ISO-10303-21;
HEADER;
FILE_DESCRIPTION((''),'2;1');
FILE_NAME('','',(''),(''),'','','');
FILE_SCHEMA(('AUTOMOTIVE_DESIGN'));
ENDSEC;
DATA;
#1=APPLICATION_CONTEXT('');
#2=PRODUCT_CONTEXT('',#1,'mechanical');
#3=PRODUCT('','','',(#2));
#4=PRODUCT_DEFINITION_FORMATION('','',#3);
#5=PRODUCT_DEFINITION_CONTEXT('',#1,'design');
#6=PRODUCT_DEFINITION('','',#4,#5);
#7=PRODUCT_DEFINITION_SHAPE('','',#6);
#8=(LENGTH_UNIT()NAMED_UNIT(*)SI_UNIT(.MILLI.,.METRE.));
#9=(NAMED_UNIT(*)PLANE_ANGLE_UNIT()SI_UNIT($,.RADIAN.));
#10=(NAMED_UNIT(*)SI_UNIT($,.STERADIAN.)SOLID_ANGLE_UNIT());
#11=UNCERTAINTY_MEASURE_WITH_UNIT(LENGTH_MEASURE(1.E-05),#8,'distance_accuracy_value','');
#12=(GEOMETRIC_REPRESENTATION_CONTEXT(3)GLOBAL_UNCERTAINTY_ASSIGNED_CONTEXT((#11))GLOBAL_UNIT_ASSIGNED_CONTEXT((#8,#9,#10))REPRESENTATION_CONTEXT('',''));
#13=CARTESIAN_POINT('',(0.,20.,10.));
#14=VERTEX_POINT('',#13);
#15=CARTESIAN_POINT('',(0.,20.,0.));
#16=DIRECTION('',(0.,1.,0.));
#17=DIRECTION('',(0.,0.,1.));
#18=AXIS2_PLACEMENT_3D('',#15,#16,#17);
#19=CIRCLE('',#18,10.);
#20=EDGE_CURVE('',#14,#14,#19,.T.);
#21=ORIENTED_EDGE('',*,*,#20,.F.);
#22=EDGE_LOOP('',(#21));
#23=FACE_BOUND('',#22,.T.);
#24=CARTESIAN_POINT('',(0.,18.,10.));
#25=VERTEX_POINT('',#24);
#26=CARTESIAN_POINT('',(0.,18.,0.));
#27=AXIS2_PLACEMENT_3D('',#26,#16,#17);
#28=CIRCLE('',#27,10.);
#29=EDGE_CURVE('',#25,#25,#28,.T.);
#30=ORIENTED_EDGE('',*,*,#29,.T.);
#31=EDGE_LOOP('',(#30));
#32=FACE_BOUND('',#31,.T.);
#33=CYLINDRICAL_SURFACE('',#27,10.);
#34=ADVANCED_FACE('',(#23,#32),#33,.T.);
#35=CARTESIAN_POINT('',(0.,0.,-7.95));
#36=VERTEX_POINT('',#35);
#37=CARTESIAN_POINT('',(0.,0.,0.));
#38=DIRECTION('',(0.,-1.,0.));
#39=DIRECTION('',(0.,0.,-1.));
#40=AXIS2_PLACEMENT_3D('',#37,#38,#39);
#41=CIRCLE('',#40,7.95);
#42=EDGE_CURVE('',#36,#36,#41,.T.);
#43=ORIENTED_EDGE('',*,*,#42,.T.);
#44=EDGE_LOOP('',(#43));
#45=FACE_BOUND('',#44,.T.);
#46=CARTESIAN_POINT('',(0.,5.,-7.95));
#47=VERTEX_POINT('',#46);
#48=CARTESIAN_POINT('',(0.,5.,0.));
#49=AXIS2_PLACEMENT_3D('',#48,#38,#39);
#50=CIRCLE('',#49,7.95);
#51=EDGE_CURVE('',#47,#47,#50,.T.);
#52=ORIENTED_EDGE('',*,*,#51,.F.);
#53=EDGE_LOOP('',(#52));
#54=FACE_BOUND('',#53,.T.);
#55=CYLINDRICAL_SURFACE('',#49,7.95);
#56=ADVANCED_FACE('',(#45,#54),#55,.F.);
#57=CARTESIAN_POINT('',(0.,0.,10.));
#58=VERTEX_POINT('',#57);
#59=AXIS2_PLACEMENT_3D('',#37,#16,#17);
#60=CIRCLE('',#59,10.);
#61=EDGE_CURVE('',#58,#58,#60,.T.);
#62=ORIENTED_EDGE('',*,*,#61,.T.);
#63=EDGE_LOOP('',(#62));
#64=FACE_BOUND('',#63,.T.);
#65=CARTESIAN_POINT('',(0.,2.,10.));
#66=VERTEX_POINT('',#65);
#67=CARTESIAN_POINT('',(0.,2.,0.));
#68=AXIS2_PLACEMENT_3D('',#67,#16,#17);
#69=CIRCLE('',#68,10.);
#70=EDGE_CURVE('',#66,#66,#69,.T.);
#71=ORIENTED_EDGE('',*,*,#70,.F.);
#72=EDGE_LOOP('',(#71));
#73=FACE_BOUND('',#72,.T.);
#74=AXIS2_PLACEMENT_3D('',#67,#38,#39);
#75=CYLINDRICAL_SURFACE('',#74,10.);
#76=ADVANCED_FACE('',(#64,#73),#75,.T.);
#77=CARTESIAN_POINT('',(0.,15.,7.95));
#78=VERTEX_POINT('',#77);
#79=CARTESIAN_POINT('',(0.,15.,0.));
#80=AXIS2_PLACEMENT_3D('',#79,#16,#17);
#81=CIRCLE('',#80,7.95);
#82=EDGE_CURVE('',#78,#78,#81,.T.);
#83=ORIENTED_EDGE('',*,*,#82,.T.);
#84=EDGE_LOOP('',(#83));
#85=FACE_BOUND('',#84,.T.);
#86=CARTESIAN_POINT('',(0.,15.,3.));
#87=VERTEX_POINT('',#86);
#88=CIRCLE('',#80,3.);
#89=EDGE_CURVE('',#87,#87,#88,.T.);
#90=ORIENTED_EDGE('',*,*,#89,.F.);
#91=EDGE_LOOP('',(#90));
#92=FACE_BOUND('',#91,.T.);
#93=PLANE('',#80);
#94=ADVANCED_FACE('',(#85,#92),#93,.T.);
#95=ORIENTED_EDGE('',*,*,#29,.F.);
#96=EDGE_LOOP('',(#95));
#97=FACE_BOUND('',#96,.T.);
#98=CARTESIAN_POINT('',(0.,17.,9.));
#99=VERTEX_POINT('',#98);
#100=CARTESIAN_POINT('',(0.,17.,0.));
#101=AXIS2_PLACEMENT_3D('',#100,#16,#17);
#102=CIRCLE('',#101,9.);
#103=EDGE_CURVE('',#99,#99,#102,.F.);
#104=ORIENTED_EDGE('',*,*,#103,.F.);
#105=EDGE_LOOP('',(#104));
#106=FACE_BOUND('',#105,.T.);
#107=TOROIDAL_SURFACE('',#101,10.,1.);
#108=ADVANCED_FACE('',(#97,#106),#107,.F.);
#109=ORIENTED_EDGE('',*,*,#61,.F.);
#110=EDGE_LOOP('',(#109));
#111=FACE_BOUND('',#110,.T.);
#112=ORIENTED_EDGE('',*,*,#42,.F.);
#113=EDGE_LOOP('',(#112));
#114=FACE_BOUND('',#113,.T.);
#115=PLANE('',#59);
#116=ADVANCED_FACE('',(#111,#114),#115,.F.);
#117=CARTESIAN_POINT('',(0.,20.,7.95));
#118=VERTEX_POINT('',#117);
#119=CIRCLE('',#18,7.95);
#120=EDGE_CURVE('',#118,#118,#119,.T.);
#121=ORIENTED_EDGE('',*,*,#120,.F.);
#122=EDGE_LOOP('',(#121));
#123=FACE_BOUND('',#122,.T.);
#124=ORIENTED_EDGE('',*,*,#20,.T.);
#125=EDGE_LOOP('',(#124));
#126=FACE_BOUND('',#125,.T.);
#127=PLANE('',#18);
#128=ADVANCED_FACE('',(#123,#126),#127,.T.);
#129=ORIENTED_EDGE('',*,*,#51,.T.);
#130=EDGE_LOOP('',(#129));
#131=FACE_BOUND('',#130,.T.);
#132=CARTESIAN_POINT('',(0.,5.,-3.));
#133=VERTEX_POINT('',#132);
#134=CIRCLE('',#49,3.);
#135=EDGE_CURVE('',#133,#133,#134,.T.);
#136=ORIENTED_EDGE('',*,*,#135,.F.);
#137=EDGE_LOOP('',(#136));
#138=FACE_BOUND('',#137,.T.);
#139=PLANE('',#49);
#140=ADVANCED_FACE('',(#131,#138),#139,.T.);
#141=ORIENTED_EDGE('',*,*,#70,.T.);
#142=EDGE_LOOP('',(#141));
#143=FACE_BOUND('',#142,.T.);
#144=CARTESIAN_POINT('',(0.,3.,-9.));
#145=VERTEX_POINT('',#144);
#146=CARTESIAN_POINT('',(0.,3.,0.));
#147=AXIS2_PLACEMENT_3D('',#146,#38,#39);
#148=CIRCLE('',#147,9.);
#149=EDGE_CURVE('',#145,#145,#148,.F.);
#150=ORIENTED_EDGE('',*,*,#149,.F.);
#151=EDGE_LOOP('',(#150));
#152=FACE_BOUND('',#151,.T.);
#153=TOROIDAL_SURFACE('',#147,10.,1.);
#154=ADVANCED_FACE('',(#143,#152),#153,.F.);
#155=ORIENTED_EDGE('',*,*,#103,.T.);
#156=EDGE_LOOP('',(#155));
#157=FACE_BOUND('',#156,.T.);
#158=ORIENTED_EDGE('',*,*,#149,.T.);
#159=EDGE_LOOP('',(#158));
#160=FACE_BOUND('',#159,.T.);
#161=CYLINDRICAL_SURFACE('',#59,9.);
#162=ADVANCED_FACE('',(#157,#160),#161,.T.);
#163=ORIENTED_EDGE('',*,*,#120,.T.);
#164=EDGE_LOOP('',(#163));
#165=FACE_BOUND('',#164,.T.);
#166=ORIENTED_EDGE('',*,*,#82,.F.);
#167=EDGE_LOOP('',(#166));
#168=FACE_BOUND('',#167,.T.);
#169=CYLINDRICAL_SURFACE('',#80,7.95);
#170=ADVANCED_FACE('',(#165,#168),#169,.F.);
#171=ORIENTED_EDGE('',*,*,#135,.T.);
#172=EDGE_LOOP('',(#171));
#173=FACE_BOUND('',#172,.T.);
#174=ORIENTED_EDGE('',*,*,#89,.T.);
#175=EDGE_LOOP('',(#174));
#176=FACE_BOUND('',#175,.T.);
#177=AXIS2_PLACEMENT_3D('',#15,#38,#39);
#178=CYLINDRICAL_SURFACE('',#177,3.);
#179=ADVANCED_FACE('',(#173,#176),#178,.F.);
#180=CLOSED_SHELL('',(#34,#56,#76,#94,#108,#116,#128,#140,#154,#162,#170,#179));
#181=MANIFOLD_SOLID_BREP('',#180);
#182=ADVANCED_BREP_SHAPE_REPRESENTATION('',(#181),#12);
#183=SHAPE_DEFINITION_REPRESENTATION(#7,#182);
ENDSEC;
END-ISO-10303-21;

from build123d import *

# Parameters (mm, degrees)
SKETCH_1_R          = 8
SKETCH_1_R_2        = 3
EXTRUDE_1_DEPTH     = 20
EXTRUDE_START       = -20
SKETCH_2_R          = 9
SKETCH_2_R_2        = 3
EXTRUDE_2_DEPTH     = 20
EXTRUDE_START_2     = -2
SKETCH_3_R          = 10
SKETCH_3_R_2        = 9
EXTRUDE_3_DEPTH     = 2
FILLET_1_R          = 1
FILLET_2_R          = 1
SKETCH_4_R          = 7.95
CUT_EXTRUDE_1_DEPTH = 5
CUT_EXTRUDE_START   = -5
SKETCH_5_R          = 7.95
CUT_EXTRUDE_2_DEPTH = 5


with BuildPart() as part:
    # 草图1 → 凸台-拉伸1 (new body)
    with BuildSketch(Plane(origin=(0, 0, 0), x_dir=(1, 0, 0), z_dir=(0, 1, 0))):
        with Locations(Location((0, 0, 0), (0, 0, 270))):
            Circle(SKETCH_1_R)
        with Locations(Location((0, 0, 0), (0, 0, 270))):
            Circle(SKETCH_1_R_2, mode=Mode.SUBTRACT)
    extrude(amount=EXTRUDE_1_DEPTH)

    # 草图2 → 凸台-拉伸2 (add)
    with BuildSketch(Plane(origin=(0, 20, 0), x_dir=(1, 0, 0), z_dir=(0, 1, 0)).offset(EXTRUDE_START)):
        with Locations(Location((0, 0, 0), (0, 0, 270))):
            Circle(SKETCH_2_R)
        with Locations(Location((0, 0, 0), (0, 0, 270))):
            Circle(SKETCH_2_R_2, mode=Mode.SUBTRACT)
    extrude(amount=EXTRUDE_2_DEPTH)

    # 草图3 → 凸台-拉伸3 (add)
    with BuildSketch(Plane(origin=(0, 20, 0), x_dir=(1, 0, 0), z_dir=(0, 1, 0)).offset(EXTRUDE_START_2)):
        with Locations(Location((0, 0, 0), (0, 0, 270))):
            Circle(SKETCH_3_R)
        with Locations(Location((0, 0, 0), (0, 0, 270))):
            Circle(SKETCH_3_R_2, mode=Mode.SUBTRACT)
    extrude_3 = extrude(amount=EXTRUDE_3_DEPTH)

    # 镜向1: 凸台-拉伸3 across plane
    add(extrude_3.mirror(Plane(origin=(0, 10, 0), x_dir=(0, 0, 1), z_dir=(0, -1, 0))))

    # 圆角1
    fillet_1_edges = [part.edges().sort_by_distance(p)[0] for p in [
        (0, 18, -9),
    ]]
    fillet(fillet_1_edges, radius=FILLET_1_R - 0.0001)  # a hair under: the kernel refuses the full size

    # 圆角2
    fillet_2_edges = [part.edges().sort_by_distance(p)[0] for p in [
        (0, 2, -9),
    ]]
    fillet(fillet_2_edges, radius=FILLET_2_R - 0.0001)  # a hair under: the kernel refuses the full size

    # 草图4 → 切除-拉伸1 (cut)
    with BuildSketch(Plane.XZ):
        with Locations(Location((0, 0, 0), (0, 0, 270))):
            Circle(SKETCH_4_R)
    extrude(amount=-CUT_EXTRUDE_1_DEPTH, mode=Mode.SUBTRACT)

    # 草图5 → 切除-拉伸2 (cut)
    with BuildSketch(Plane(origin=(0, 20, 0), x_dir=(1, 0, 0), z_dir=(0, 1, 0)).offset(CUT_EXTRUDE_START)):
        with Locations(Location((0, 0, 0), (0, 0, 90))):
            Circle(SKETCH_5_R)
    extrude(amount=CUT_EXTRUDE_2_DEPTH, mode=Mode.SUBTRACT)


solid = part.part
